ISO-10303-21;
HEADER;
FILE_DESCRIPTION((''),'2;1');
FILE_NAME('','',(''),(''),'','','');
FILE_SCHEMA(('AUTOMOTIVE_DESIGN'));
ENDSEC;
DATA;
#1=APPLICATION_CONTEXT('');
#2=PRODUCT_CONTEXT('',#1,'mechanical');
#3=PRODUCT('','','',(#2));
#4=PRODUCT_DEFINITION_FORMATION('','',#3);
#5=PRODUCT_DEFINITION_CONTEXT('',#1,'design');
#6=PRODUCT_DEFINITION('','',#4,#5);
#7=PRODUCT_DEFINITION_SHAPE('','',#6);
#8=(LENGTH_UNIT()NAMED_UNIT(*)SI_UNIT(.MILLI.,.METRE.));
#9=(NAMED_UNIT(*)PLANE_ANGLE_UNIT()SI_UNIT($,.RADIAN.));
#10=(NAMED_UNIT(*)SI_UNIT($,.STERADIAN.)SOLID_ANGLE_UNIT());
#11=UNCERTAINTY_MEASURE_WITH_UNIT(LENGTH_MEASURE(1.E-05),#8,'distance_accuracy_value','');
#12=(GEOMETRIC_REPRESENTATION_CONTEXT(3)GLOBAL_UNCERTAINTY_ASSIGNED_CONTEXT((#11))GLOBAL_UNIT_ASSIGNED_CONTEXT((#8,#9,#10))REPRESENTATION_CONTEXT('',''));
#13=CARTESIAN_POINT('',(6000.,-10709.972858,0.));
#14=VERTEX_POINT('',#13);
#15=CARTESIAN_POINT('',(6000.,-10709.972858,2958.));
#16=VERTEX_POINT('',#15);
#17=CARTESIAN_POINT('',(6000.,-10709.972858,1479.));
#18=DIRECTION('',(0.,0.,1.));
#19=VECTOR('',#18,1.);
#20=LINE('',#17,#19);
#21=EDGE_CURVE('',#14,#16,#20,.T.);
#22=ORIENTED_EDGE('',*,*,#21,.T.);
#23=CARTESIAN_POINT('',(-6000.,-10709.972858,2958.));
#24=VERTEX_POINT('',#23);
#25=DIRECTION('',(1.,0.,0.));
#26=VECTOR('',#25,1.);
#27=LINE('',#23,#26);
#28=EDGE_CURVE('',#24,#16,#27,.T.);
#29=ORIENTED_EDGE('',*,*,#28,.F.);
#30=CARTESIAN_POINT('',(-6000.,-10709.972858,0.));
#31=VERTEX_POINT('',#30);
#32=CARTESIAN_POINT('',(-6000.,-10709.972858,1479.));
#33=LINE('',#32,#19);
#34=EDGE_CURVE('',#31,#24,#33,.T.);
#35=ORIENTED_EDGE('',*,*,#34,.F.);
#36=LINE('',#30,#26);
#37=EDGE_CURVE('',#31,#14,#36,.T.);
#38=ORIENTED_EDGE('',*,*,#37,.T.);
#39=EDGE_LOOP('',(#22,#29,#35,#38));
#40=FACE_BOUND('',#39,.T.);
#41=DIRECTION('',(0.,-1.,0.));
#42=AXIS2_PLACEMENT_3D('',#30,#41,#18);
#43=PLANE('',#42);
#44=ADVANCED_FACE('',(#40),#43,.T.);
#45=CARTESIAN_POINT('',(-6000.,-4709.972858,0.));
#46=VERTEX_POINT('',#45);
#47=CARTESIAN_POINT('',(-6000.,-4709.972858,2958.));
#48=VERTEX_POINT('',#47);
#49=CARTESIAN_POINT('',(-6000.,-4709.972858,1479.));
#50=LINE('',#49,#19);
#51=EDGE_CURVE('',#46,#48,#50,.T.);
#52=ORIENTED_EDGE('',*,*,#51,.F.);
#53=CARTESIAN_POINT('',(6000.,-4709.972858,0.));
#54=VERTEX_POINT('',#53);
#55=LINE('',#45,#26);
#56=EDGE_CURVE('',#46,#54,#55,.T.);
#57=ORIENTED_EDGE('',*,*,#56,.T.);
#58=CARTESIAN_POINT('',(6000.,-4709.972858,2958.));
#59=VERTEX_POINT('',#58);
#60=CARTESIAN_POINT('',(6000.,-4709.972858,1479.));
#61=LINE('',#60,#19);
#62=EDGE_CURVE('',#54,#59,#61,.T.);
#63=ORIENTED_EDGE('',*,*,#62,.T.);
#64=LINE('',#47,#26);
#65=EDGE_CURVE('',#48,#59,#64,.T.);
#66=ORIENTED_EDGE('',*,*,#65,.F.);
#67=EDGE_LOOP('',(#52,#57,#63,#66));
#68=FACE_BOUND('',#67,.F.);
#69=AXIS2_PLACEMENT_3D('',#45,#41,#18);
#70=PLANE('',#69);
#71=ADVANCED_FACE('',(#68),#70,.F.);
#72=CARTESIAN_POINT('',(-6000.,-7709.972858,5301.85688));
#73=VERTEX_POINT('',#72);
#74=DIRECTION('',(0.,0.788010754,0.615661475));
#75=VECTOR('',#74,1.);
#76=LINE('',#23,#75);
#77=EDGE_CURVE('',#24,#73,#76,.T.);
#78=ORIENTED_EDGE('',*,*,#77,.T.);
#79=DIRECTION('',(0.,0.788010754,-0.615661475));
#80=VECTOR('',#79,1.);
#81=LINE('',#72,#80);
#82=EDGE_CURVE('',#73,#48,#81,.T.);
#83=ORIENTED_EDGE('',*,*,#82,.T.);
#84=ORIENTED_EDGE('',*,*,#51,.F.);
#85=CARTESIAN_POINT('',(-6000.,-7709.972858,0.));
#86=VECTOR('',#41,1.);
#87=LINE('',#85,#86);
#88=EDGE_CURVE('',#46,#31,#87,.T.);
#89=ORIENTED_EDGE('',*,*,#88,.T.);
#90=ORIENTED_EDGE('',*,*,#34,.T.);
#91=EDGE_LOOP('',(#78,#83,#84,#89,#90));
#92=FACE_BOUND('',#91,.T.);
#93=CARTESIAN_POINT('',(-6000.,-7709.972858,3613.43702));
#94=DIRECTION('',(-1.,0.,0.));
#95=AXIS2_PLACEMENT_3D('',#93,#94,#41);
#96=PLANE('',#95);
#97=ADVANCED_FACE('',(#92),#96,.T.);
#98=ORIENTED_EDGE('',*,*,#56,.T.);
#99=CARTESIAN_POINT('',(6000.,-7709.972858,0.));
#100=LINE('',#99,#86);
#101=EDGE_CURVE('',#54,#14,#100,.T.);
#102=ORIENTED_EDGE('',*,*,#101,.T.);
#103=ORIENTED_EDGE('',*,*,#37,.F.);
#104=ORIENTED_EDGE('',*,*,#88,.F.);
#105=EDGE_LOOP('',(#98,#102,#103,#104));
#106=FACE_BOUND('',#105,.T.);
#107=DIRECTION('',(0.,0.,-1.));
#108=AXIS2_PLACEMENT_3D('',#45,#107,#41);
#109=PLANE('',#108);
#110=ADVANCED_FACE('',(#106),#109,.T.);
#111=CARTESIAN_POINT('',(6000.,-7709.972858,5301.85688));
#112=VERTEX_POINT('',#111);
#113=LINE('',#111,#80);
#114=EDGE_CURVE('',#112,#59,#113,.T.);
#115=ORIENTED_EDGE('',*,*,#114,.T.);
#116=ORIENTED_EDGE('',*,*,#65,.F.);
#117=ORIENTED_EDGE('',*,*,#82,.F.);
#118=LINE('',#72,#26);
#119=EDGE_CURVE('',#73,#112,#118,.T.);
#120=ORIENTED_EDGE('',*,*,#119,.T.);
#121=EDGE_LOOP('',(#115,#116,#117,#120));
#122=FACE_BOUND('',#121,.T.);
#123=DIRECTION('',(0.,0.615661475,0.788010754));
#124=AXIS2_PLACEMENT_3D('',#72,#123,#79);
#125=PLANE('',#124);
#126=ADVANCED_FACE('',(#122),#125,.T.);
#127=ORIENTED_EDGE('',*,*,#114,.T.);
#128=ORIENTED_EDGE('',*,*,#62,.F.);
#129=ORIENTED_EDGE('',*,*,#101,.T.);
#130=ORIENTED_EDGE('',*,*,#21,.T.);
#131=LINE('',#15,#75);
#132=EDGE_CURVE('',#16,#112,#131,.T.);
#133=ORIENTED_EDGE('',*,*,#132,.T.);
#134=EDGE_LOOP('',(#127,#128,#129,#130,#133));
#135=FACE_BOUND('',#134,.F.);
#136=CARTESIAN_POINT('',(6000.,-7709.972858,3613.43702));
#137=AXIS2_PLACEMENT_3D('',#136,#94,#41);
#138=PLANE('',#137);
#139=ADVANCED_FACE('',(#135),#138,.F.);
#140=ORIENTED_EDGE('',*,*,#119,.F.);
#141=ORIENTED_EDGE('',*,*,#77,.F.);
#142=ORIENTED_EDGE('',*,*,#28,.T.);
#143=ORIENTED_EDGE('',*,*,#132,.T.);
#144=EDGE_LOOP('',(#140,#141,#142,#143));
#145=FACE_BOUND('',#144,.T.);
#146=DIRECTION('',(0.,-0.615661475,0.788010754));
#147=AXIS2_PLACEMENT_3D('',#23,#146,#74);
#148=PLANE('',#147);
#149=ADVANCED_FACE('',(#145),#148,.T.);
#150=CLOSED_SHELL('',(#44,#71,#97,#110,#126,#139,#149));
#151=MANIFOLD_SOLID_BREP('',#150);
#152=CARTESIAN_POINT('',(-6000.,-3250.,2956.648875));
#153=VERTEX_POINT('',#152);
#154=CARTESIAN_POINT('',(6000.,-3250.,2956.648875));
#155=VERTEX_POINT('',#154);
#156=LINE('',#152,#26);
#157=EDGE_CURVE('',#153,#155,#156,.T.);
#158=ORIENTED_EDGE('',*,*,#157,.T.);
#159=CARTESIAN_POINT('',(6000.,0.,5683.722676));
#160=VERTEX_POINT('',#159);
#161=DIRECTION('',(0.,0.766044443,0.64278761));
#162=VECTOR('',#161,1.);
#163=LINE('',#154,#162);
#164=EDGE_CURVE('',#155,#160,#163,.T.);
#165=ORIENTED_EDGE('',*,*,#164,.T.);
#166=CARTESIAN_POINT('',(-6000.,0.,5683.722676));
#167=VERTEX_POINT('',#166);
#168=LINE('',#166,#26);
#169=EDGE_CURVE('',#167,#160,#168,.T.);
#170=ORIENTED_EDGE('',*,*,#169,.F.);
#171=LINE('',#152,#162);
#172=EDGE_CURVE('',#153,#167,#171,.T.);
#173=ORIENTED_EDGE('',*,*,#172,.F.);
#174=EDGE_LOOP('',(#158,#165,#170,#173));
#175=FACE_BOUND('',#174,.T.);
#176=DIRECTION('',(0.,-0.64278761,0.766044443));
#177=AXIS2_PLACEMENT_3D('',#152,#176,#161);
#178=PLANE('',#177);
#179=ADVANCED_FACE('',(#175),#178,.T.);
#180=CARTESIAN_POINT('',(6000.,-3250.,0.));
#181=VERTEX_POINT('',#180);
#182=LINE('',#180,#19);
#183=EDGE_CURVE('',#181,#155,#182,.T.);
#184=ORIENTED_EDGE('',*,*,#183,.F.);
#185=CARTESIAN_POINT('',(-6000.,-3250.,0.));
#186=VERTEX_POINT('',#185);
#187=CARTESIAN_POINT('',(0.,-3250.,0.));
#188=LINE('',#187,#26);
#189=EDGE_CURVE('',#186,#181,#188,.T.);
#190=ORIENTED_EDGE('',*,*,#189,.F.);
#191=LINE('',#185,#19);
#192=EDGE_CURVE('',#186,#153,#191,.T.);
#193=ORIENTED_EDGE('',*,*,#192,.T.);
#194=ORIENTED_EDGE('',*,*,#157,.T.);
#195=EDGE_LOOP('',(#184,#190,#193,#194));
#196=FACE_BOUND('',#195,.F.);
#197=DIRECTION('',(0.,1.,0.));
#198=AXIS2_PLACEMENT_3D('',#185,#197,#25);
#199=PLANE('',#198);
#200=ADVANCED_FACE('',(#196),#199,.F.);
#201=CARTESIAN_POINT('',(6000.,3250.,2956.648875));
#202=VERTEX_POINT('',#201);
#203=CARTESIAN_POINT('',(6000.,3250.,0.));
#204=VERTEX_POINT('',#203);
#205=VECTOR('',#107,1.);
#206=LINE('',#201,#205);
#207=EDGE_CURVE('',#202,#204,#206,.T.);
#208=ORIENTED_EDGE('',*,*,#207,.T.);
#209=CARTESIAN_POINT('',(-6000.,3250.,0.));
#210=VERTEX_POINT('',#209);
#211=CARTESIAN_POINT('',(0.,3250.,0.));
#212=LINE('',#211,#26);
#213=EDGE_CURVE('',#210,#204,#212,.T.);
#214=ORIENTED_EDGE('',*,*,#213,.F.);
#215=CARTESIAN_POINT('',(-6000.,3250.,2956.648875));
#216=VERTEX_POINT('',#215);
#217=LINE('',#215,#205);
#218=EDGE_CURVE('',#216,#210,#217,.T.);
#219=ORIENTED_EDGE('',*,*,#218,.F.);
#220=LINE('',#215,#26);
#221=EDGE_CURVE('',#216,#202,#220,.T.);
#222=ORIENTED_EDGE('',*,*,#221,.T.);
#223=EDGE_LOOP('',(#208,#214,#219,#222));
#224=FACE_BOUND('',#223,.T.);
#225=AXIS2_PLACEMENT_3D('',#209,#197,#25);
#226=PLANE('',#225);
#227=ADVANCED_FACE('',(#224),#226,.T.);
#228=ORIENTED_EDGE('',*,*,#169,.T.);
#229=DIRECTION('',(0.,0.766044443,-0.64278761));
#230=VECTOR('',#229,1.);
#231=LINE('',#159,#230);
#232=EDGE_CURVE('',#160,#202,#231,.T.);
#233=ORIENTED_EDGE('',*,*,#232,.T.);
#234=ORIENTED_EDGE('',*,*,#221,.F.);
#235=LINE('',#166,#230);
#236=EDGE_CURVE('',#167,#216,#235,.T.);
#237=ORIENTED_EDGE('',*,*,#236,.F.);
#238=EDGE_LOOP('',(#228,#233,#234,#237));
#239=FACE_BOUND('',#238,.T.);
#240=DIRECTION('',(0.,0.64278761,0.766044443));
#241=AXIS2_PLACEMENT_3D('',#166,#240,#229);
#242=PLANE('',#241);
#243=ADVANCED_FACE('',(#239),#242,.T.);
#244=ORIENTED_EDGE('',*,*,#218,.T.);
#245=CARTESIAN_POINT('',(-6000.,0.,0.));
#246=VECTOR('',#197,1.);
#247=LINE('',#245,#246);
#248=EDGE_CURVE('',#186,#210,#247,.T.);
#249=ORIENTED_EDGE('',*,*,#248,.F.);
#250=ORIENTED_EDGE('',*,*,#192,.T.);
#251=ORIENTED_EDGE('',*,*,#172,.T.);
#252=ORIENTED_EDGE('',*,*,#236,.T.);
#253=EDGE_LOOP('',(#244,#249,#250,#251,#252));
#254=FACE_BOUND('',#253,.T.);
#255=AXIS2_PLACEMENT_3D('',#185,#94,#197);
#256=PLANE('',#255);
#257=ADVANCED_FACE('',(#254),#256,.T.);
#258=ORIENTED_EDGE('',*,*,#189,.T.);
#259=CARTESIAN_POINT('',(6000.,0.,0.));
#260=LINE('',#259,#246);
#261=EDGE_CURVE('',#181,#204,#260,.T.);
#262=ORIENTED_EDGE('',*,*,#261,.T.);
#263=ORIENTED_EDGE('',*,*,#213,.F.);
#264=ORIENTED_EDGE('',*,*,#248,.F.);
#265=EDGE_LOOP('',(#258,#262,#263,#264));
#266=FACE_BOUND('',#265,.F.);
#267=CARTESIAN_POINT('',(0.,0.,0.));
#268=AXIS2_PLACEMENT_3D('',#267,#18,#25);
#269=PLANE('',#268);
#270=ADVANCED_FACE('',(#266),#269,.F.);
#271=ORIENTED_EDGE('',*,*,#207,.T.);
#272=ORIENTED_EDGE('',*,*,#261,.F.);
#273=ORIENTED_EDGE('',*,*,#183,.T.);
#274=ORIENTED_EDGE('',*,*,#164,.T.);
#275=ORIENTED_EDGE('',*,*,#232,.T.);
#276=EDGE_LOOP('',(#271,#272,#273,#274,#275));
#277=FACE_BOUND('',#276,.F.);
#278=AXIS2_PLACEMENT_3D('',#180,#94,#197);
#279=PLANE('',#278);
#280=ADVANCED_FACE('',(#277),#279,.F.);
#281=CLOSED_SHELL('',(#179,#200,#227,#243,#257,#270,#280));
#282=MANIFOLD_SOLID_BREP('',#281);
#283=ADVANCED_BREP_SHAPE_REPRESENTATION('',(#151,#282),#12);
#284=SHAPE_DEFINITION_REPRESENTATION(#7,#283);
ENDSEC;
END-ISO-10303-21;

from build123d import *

# Parameters (mm, degrees)
F0_W     = 12000
F0_H     = 6500
F1_DEPTH = 2800
F3_DEPTH = 12000
F2_W     = 6000
F2_H     = 2958


# Not quite as in the source:
# - a feature names something its author has since deleted; it is built from what else it names


with BuildPart() as f1:
    # F0 (on Top) → F1 (new body)
    with BuildSketch(Plane.XY):
        Rectangle(F0_W, F0_H)
    extrude(amount=F1_DEPTH)

    # F2 (on face) → F3 (join)
    with BuildSketch(Plane(origin=(-6000, 0, 0), x_dir=(0, -1, 0), z_dir=(-1, 0, 0))):
        Polygon((-2254.2731399598, 3270), (-2814.3973284791, 2800), (-2254.2731399598, 2800), align=None)
        Polygon((-3250, 2956.6488747199), (-3250, 2800), (0, 5527.0738013262), (3250, 2800), (3250, 2956.6488747199), (3173.8782442282, 3020.5226119126), (0, 5683.722676046), (-3178.3420854061, 3016.7770044265), align=None)
        Polygon((2254.2731399598, 3270), (2254.2731399598, 2800), (2814.3973284791, 2800), align=None)
        Polygon((-2814.3973284791, 2800), (-3250, 2800), (-3250, 2570), (-2254.2731399598, 2570), (-2254.2731399598, 2800), align=None)
        Polygon((3250, 2570), (3250, 2800), (2814.3973284791, 2800), (2254.2731399598, 2800), (2254.2731399598, 2570), align=None)
        Polygon((-2254.2731399598, 2570), (-3250, 2570), (-3250, 2400), (3250, 2400), (3250, 2570), (2254.2731399598, 2570), align=None)
        Polygon((0, 5527.0738013262), (-3250, 2800), (-2814.3973284791, 2800), (-2254.2731399598, 3270), (-650, 4616.1450000479), (0, 5161.5597603131), (650, 4616.1450000479), (2254.2731399598, 3270), (2814.3973284791, 2800), (3250, 2800), align=None)
        Polygon((0, 5161.5597603131), (-650, 4616.1450000479), (650, 4616.1450000479), align=None)
        Polygon((-2254.2731399598, 3270), (-2254.2731399598, 2800), (2254.2731399598, 2800), (2254.2731399598, 3270), (650, 4616.1450000479), (-650, 4616.1450000479), align=None)
    extrude(amount=-F3_DEPTH)


with BuildPart() as f3:
    # F2 (on face) → F3, piece 2 (new body)
    with BuildSketch(Plane(origin=(-6000, 0, 0), x_dir=(0, -1, 0), z_dir=(-1, 0, 0))):
        Polygon((7709.972858429, 5301.8568795202), (4709.972858429, 2958), (10709.972858429, 2958), align=None)
        with Locations((7709.972858429, 1479)):
            Rectangle(F2_W, F2_H)
    extrude(amount=-F3_DEPTH)


solid = Compound([f1.part, f3.part])
